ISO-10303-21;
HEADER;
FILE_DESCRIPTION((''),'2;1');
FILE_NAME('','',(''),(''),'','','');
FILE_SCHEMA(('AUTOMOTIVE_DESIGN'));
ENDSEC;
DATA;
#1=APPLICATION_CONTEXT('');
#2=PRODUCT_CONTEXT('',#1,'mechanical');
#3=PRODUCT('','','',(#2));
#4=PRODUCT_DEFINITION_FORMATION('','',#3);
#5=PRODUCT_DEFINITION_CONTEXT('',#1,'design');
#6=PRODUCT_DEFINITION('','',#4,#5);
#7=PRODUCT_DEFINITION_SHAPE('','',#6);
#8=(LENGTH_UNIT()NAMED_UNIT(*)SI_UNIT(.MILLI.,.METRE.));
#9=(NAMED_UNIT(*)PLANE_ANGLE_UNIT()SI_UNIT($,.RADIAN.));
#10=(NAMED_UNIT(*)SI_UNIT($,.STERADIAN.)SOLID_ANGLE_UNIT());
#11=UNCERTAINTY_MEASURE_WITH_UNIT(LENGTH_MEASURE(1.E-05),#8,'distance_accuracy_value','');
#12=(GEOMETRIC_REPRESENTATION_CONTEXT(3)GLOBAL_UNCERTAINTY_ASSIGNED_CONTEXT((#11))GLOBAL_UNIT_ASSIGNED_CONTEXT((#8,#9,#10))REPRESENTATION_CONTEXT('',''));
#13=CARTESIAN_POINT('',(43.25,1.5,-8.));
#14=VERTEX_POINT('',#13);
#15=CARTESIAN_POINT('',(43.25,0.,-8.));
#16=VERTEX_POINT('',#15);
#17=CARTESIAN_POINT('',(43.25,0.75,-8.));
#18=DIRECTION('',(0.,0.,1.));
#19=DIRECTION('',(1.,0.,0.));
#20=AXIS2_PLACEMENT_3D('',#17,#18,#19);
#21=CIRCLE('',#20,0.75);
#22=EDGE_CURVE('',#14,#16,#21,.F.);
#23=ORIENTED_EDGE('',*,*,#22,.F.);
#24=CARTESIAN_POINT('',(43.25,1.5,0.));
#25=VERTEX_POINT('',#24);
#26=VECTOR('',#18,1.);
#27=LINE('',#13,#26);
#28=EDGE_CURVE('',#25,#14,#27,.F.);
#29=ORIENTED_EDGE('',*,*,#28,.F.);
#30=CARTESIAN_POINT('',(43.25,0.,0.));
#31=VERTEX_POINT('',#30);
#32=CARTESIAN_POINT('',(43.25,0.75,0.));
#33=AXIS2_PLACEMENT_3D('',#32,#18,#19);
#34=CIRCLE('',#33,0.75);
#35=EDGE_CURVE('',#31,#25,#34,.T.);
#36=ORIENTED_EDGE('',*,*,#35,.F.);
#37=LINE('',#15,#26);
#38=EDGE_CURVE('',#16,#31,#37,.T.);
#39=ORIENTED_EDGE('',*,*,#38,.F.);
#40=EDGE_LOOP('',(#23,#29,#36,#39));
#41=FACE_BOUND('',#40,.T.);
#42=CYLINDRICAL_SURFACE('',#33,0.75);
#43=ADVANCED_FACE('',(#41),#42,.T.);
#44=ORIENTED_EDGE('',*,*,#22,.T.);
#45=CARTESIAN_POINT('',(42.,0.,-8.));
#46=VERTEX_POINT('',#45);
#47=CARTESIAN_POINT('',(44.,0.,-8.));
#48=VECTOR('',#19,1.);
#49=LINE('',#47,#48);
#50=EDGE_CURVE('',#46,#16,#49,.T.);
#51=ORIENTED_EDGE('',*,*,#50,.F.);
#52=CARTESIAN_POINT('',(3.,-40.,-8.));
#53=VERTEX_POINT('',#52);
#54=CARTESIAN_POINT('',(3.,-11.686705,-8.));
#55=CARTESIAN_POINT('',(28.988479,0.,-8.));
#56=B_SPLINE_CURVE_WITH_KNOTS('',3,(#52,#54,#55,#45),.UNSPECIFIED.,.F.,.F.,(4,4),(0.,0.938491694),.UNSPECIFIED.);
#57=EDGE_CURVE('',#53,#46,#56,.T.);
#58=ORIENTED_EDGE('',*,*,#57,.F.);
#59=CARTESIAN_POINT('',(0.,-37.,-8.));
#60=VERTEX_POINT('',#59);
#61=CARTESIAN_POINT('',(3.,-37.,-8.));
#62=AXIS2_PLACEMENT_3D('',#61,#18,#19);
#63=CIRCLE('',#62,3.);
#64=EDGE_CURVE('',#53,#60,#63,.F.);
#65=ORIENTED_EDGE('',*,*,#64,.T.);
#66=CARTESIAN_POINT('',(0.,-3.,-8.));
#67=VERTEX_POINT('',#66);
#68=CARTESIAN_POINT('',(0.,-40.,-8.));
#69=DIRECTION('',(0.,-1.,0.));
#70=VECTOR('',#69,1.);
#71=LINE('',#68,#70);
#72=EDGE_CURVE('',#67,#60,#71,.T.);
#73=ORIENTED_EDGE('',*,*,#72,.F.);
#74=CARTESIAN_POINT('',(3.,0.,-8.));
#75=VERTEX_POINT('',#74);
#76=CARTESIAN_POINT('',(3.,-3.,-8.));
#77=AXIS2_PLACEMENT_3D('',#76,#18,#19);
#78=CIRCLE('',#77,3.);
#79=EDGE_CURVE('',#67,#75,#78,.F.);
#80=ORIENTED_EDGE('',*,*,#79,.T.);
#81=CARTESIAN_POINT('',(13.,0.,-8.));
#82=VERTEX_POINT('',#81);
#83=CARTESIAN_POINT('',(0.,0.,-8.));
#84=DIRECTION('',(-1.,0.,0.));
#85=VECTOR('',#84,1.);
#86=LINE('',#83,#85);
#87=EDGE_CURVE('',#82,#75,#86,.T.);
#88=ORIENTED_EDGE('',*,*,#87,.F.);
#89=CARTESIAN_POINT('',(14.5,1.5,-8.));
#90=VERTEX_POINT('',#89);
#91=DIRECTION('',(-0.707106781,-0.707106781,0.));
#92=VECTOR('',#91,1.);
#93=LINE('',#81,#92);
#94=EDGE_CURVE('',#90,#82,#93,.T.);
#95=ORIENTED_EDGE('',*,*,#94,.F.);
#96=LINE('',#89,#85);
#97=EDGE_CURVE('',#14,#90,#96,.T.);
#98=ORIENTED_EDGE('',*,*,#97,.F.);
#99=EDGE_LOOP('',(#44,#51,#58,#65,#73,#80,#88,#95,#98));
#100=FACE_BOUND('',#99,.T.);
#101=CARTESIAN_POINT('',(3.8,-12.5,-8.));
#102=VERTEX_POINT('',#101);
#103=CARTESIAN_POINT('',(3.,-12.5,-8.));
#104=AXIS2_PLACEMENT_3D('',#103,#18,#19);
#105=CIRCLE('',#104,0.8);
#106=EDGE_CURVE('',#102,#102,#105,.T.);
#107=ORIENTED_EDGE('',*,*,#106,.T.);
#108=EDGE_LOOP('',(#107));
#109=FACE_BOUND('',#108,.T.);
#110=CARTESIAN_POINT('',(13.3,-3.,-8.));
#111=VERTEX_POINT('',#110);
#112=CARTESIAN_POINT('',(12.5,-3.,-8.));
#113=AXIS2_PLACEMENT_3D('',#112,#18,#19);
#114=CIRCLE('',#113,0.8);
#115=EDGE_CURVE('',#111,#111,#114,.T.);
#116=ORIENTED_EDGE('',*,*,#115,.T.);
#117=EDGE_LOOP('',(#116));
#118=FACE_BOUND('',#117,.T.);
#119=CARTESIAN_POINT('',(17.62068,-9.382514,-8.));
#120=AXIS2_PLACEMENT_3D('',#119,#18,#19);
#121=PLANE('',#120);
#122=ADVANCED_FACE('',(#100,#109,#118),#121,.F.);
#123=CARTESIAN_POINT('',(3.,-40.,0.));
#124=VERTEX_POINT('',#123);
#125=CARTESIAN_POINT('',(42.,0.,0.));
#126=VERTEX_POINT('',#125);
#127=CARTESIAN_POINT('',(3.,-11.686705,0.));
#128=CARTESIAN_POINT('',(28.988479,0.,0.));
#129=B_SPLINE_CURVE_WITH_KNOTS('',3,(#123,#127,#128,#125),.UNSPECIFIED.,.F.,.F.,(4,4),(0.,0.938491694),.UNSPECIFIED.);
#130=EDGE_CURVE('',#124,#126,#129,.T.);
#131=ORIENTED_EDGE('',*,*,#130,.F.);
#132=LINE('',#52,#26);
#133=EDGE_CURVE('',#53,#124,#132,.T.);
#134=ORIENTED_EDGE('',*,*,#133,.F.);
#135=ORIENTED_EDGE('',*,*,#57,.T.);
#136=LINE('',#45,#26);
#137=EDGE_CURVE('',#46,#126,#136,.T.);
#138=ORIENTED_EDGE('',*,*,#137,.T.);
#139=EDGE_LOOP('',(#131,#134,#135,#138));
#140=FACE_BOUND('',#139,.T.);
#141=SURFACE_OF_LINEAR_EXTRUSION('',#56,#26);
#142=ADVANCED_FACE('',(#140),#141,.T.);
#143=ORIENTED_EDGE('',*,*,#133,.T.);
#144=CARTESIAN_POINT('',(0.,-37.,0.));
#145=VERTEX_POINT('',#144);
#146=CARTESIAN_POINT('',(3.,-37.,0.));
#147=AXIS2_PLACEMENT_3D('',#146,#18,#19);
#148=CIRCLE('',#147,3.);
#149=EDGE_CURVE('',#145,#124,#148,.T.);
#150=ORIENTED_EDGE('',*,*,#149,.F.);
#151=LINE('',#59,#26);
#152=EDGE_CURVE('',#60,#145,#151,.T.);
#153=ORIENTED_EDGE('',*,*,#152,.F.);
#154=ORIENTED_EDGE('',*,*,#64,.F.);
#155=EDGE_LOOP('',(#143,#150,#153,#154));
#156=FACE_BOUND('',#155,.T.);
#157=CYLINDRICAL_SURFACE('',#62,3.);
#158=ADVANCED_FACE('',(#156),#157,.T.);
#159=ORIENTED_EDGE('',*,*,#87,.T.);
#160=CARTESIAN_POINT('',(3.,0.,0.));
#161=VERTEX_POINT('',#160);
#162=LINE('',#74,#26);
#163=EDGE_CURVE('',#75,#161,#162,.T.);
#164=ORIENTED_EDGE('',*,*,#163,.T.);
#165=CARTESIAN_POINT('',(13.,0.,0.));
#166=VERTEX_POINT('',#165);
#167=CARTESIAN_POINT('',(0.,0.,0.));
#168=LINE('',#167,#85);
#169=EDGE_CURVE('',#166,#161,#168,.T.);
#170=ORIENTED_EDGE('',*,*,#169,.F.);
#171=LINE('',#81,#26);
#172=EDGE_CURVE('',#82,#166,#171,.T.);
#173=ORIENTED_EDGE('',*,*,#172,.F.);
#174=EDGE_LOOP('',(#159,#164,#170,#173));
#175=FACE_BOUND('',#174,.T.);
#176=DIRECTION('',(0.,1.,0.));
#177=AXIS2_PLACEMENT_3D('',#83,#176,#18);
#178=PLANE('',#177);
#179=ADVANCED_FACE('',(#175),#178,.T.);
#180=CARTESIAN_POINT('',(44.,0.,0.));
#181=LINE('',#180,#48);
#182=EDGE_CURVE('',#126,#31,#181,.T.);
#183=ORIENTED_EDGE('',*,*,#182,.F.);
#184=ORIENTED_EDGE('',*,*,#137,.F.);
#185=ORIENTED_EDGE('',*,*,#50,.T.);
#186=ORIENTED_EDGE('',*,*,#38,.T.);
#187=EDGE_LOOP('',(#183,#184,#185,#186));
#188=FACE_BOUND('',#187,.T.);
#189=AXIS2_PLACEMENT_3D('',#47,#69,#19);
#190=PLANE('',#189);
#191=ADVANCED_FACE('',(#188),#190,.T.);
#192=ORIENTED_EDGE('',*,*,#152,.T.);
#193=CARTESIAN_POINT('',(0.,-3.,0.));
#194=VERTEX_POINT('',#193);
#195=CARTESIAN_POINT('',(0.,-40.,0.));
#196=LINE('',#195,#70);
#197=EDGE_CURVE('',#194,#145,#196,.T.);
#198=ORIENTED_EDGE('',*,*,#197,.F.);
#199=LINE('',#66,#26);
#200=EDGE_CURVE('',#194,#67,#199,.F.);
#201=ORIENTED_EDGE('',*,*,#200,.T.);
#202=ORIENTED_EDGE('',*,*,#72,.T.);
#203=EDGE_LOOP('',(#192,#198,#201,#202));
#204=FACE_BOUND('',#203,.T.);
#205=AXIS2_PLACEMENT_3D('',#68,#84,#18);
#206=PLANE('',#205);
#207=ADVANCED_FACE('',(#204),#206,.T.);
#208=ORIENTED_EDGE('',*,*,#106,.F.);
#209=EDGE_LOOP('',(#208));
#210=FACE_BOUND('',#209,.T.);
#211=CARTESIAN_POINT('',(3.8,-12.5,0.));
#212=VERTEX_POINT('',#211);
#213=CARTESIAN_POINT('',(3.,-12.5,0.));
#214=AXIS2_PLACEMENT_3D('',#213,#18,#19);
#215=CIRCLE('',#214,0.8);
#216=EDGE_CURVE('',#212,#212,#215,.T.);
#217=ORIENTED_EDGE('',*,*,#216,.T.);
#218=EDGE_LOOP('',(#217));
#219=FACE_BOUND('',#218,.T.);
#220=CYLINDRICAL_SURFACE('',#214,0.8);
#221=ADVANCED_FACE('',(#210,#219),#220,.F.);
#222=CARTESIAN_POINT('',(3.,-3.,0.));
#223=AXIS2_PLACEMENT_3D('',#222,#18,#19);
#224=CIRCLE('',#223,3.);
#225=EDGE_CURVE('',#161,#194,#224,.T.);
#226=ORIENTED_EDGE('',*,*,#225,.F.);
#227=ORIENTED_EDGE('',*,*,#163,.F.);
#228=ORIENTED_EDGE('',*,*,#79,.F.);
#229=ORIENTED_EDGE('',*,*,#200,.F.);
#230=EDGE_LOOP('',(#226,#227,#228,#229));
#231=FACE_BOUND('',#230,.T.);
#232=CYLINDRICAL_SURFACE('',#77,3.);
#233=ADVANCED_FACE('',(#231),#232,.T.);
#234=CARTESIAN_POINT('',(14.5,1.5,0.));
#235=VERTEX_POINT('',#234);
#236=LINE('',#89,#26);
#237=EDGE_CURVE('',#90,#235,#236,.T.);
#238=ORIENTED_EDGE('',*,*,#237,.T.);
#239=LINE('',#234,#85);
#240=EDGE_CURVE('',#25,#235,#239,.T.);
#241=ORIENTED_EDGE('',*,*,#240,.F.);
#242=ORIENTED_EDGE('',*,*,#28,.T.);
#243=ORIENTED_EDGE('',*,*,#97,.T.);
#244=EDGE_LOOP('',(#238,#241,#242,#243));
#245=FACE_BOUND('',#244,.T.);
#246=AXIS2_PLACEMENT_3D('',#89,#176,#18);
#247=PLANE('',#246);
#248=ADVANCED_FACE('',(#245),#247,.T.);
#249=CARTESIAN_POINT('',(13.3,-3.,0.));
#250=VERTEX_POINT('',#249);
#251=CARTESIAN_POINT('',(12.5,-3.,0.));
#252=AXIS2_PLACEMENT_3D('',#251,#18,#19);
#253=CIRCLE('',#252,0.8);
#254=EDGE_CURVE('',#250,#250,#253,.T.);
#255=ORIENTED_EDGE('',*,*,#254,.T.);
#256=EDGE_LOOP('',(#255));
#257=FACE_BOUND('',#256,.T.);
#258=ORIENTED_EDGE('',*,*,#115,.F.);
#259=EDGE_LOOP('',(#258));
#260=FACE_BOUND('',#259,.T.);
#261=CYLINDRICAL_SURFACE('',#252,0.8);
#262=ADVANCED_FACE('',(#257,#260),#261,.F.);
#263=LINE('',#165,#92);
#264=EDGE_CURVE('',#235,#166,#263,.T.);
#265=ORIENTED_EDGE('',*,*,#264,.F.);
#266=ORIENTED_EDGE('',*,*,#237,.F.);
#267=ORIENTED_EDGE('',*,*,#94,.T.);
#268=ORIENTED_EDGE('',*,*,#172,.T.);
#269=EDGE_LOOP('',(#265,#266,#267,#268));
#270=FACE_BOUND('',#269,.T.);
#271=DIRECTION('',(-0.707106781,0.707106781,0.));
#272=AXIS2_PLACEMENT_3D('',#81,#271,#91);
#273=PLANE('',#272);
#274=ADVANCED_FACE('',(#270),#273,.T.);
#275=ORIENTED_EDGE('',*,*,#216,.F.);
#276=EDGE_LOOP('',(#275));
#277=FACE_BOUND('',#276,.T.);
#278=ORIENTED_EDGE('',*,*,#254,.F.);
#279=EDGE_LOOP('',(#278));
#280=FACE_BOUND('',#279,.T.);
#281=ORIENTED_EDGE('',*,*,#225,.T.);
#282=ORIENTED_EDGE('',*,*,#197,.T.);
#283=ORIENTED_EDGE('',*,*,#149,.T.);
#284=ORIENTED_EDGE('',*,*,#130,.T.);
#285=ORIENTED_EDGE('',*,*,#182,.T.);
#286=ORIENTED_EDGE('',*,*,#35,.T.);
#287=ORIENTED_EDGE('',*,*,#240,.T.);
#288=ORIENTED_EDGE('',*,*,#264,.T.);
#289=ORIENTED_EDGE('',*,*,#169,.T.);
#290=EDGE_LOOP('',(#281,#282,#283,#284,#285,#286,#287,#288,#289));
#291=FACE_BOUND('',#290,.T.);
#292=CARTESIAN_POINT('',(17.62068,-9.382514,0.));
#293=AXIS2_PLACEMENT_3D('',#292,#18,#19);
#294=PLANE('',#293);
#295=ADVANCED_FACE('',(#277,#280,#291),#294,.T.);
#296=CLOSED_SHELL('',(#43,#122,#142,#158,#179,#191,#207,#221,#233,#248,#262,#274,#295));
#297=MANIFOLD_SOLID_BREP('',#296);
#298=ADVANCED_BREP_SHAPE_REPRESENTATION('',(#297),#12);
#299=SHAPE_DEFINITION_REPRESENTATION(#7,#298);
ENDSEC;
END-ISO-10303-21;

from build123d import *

# Parameters (mm, degrees)
EXTRUDE_641_DEPTH = 8
FILLET_2_R        = 3
FILLET_3_RADIUS   = 0.75
FILLET_3_LENGTH   = 8
HOLE_WIZARD_M2_D  = 1.6
FILLET_4_R        = 3


with BuildPart() as part:
    # Model → Extrude 641 (new body)
    with BuildSketch(Plane.XY):
        with BuildLine():
            Line((0, 0), (13, 0))
            Line((13, 0), (14.5, 1.5))
            Line((14.5, 1.5), (44, 1.5))
            Line((44, 1.5), (44, 0))
            Line((44, 0), (42, 0))
            add(Edge.make_bspline(
                [(3, -40), (3, -11.686704979), (28.988478702, 0), (42, 0)],
                knots=[0, 0, 0, 0, 0.938491694, 0.938491694, 0.938491694, 0.938491694], degree=3))
            Line((3, -40), (0, -40))
            Line((0, -40), (0, 0))
        make_face()
    extrude(amount=-EXTRUDE_641_DEPTH)

    # Скругление2
    fillet_2_edges = [part.edges().sort_by_distance(p)[0] for p in [
        (0, 0, -4),
    ]]
    fillet(fillet_2_edges, radius=FILLET_2_R)

    # Скругление3: full round fillet: the end face becomes a half cylinder, R = half its width
    fillet_3_face = Plane((44, 0.75, -4), x_dir=(0, 0, 1), z_dir=(1, 0, 0))  # on the end face: x along it, z out of the body
    fillet_3_slab = fillet_3_face.offset(-FILLET_3_RADIUS / 2) * Box(FILLET_3_LENGTH, 2 * FILLET_3_RADIUS, FILLET_3_RADIUS, mode=Mode.PRIVATE)  # the body's end, R deep
    fillet_3_round = Plane((43.25, 0.75, -4), x_dir=(1, 0, 0), z_dir=(0, 0, 1)) * Cylinder(FILLET_3_RADIUS, FILLET_3_LENGTH, mode=Mode.PRIVATE)  # its axis R under the face
    add(fillet_3_slab - fillet_3_round, mode=Mode.SUBTRACT)

    # Крепление M2 (through all)
    with Locations(Plane.XY):
        with Locations((3, -12.5), (12.5, -3)):
            Hole(HOLE_WIZARD_M2_D / 2)

    # Скругление4
    fillet_4_edges = [part.edges().sort_by_distance(p)[0] for p in [
        (0, -40, -4),
    ]]
    fillet(fillet_4_edges, radius=FILLET_4_R - 0.0001)  # a hair under: the kernel refuses the full size


solid = part.part
